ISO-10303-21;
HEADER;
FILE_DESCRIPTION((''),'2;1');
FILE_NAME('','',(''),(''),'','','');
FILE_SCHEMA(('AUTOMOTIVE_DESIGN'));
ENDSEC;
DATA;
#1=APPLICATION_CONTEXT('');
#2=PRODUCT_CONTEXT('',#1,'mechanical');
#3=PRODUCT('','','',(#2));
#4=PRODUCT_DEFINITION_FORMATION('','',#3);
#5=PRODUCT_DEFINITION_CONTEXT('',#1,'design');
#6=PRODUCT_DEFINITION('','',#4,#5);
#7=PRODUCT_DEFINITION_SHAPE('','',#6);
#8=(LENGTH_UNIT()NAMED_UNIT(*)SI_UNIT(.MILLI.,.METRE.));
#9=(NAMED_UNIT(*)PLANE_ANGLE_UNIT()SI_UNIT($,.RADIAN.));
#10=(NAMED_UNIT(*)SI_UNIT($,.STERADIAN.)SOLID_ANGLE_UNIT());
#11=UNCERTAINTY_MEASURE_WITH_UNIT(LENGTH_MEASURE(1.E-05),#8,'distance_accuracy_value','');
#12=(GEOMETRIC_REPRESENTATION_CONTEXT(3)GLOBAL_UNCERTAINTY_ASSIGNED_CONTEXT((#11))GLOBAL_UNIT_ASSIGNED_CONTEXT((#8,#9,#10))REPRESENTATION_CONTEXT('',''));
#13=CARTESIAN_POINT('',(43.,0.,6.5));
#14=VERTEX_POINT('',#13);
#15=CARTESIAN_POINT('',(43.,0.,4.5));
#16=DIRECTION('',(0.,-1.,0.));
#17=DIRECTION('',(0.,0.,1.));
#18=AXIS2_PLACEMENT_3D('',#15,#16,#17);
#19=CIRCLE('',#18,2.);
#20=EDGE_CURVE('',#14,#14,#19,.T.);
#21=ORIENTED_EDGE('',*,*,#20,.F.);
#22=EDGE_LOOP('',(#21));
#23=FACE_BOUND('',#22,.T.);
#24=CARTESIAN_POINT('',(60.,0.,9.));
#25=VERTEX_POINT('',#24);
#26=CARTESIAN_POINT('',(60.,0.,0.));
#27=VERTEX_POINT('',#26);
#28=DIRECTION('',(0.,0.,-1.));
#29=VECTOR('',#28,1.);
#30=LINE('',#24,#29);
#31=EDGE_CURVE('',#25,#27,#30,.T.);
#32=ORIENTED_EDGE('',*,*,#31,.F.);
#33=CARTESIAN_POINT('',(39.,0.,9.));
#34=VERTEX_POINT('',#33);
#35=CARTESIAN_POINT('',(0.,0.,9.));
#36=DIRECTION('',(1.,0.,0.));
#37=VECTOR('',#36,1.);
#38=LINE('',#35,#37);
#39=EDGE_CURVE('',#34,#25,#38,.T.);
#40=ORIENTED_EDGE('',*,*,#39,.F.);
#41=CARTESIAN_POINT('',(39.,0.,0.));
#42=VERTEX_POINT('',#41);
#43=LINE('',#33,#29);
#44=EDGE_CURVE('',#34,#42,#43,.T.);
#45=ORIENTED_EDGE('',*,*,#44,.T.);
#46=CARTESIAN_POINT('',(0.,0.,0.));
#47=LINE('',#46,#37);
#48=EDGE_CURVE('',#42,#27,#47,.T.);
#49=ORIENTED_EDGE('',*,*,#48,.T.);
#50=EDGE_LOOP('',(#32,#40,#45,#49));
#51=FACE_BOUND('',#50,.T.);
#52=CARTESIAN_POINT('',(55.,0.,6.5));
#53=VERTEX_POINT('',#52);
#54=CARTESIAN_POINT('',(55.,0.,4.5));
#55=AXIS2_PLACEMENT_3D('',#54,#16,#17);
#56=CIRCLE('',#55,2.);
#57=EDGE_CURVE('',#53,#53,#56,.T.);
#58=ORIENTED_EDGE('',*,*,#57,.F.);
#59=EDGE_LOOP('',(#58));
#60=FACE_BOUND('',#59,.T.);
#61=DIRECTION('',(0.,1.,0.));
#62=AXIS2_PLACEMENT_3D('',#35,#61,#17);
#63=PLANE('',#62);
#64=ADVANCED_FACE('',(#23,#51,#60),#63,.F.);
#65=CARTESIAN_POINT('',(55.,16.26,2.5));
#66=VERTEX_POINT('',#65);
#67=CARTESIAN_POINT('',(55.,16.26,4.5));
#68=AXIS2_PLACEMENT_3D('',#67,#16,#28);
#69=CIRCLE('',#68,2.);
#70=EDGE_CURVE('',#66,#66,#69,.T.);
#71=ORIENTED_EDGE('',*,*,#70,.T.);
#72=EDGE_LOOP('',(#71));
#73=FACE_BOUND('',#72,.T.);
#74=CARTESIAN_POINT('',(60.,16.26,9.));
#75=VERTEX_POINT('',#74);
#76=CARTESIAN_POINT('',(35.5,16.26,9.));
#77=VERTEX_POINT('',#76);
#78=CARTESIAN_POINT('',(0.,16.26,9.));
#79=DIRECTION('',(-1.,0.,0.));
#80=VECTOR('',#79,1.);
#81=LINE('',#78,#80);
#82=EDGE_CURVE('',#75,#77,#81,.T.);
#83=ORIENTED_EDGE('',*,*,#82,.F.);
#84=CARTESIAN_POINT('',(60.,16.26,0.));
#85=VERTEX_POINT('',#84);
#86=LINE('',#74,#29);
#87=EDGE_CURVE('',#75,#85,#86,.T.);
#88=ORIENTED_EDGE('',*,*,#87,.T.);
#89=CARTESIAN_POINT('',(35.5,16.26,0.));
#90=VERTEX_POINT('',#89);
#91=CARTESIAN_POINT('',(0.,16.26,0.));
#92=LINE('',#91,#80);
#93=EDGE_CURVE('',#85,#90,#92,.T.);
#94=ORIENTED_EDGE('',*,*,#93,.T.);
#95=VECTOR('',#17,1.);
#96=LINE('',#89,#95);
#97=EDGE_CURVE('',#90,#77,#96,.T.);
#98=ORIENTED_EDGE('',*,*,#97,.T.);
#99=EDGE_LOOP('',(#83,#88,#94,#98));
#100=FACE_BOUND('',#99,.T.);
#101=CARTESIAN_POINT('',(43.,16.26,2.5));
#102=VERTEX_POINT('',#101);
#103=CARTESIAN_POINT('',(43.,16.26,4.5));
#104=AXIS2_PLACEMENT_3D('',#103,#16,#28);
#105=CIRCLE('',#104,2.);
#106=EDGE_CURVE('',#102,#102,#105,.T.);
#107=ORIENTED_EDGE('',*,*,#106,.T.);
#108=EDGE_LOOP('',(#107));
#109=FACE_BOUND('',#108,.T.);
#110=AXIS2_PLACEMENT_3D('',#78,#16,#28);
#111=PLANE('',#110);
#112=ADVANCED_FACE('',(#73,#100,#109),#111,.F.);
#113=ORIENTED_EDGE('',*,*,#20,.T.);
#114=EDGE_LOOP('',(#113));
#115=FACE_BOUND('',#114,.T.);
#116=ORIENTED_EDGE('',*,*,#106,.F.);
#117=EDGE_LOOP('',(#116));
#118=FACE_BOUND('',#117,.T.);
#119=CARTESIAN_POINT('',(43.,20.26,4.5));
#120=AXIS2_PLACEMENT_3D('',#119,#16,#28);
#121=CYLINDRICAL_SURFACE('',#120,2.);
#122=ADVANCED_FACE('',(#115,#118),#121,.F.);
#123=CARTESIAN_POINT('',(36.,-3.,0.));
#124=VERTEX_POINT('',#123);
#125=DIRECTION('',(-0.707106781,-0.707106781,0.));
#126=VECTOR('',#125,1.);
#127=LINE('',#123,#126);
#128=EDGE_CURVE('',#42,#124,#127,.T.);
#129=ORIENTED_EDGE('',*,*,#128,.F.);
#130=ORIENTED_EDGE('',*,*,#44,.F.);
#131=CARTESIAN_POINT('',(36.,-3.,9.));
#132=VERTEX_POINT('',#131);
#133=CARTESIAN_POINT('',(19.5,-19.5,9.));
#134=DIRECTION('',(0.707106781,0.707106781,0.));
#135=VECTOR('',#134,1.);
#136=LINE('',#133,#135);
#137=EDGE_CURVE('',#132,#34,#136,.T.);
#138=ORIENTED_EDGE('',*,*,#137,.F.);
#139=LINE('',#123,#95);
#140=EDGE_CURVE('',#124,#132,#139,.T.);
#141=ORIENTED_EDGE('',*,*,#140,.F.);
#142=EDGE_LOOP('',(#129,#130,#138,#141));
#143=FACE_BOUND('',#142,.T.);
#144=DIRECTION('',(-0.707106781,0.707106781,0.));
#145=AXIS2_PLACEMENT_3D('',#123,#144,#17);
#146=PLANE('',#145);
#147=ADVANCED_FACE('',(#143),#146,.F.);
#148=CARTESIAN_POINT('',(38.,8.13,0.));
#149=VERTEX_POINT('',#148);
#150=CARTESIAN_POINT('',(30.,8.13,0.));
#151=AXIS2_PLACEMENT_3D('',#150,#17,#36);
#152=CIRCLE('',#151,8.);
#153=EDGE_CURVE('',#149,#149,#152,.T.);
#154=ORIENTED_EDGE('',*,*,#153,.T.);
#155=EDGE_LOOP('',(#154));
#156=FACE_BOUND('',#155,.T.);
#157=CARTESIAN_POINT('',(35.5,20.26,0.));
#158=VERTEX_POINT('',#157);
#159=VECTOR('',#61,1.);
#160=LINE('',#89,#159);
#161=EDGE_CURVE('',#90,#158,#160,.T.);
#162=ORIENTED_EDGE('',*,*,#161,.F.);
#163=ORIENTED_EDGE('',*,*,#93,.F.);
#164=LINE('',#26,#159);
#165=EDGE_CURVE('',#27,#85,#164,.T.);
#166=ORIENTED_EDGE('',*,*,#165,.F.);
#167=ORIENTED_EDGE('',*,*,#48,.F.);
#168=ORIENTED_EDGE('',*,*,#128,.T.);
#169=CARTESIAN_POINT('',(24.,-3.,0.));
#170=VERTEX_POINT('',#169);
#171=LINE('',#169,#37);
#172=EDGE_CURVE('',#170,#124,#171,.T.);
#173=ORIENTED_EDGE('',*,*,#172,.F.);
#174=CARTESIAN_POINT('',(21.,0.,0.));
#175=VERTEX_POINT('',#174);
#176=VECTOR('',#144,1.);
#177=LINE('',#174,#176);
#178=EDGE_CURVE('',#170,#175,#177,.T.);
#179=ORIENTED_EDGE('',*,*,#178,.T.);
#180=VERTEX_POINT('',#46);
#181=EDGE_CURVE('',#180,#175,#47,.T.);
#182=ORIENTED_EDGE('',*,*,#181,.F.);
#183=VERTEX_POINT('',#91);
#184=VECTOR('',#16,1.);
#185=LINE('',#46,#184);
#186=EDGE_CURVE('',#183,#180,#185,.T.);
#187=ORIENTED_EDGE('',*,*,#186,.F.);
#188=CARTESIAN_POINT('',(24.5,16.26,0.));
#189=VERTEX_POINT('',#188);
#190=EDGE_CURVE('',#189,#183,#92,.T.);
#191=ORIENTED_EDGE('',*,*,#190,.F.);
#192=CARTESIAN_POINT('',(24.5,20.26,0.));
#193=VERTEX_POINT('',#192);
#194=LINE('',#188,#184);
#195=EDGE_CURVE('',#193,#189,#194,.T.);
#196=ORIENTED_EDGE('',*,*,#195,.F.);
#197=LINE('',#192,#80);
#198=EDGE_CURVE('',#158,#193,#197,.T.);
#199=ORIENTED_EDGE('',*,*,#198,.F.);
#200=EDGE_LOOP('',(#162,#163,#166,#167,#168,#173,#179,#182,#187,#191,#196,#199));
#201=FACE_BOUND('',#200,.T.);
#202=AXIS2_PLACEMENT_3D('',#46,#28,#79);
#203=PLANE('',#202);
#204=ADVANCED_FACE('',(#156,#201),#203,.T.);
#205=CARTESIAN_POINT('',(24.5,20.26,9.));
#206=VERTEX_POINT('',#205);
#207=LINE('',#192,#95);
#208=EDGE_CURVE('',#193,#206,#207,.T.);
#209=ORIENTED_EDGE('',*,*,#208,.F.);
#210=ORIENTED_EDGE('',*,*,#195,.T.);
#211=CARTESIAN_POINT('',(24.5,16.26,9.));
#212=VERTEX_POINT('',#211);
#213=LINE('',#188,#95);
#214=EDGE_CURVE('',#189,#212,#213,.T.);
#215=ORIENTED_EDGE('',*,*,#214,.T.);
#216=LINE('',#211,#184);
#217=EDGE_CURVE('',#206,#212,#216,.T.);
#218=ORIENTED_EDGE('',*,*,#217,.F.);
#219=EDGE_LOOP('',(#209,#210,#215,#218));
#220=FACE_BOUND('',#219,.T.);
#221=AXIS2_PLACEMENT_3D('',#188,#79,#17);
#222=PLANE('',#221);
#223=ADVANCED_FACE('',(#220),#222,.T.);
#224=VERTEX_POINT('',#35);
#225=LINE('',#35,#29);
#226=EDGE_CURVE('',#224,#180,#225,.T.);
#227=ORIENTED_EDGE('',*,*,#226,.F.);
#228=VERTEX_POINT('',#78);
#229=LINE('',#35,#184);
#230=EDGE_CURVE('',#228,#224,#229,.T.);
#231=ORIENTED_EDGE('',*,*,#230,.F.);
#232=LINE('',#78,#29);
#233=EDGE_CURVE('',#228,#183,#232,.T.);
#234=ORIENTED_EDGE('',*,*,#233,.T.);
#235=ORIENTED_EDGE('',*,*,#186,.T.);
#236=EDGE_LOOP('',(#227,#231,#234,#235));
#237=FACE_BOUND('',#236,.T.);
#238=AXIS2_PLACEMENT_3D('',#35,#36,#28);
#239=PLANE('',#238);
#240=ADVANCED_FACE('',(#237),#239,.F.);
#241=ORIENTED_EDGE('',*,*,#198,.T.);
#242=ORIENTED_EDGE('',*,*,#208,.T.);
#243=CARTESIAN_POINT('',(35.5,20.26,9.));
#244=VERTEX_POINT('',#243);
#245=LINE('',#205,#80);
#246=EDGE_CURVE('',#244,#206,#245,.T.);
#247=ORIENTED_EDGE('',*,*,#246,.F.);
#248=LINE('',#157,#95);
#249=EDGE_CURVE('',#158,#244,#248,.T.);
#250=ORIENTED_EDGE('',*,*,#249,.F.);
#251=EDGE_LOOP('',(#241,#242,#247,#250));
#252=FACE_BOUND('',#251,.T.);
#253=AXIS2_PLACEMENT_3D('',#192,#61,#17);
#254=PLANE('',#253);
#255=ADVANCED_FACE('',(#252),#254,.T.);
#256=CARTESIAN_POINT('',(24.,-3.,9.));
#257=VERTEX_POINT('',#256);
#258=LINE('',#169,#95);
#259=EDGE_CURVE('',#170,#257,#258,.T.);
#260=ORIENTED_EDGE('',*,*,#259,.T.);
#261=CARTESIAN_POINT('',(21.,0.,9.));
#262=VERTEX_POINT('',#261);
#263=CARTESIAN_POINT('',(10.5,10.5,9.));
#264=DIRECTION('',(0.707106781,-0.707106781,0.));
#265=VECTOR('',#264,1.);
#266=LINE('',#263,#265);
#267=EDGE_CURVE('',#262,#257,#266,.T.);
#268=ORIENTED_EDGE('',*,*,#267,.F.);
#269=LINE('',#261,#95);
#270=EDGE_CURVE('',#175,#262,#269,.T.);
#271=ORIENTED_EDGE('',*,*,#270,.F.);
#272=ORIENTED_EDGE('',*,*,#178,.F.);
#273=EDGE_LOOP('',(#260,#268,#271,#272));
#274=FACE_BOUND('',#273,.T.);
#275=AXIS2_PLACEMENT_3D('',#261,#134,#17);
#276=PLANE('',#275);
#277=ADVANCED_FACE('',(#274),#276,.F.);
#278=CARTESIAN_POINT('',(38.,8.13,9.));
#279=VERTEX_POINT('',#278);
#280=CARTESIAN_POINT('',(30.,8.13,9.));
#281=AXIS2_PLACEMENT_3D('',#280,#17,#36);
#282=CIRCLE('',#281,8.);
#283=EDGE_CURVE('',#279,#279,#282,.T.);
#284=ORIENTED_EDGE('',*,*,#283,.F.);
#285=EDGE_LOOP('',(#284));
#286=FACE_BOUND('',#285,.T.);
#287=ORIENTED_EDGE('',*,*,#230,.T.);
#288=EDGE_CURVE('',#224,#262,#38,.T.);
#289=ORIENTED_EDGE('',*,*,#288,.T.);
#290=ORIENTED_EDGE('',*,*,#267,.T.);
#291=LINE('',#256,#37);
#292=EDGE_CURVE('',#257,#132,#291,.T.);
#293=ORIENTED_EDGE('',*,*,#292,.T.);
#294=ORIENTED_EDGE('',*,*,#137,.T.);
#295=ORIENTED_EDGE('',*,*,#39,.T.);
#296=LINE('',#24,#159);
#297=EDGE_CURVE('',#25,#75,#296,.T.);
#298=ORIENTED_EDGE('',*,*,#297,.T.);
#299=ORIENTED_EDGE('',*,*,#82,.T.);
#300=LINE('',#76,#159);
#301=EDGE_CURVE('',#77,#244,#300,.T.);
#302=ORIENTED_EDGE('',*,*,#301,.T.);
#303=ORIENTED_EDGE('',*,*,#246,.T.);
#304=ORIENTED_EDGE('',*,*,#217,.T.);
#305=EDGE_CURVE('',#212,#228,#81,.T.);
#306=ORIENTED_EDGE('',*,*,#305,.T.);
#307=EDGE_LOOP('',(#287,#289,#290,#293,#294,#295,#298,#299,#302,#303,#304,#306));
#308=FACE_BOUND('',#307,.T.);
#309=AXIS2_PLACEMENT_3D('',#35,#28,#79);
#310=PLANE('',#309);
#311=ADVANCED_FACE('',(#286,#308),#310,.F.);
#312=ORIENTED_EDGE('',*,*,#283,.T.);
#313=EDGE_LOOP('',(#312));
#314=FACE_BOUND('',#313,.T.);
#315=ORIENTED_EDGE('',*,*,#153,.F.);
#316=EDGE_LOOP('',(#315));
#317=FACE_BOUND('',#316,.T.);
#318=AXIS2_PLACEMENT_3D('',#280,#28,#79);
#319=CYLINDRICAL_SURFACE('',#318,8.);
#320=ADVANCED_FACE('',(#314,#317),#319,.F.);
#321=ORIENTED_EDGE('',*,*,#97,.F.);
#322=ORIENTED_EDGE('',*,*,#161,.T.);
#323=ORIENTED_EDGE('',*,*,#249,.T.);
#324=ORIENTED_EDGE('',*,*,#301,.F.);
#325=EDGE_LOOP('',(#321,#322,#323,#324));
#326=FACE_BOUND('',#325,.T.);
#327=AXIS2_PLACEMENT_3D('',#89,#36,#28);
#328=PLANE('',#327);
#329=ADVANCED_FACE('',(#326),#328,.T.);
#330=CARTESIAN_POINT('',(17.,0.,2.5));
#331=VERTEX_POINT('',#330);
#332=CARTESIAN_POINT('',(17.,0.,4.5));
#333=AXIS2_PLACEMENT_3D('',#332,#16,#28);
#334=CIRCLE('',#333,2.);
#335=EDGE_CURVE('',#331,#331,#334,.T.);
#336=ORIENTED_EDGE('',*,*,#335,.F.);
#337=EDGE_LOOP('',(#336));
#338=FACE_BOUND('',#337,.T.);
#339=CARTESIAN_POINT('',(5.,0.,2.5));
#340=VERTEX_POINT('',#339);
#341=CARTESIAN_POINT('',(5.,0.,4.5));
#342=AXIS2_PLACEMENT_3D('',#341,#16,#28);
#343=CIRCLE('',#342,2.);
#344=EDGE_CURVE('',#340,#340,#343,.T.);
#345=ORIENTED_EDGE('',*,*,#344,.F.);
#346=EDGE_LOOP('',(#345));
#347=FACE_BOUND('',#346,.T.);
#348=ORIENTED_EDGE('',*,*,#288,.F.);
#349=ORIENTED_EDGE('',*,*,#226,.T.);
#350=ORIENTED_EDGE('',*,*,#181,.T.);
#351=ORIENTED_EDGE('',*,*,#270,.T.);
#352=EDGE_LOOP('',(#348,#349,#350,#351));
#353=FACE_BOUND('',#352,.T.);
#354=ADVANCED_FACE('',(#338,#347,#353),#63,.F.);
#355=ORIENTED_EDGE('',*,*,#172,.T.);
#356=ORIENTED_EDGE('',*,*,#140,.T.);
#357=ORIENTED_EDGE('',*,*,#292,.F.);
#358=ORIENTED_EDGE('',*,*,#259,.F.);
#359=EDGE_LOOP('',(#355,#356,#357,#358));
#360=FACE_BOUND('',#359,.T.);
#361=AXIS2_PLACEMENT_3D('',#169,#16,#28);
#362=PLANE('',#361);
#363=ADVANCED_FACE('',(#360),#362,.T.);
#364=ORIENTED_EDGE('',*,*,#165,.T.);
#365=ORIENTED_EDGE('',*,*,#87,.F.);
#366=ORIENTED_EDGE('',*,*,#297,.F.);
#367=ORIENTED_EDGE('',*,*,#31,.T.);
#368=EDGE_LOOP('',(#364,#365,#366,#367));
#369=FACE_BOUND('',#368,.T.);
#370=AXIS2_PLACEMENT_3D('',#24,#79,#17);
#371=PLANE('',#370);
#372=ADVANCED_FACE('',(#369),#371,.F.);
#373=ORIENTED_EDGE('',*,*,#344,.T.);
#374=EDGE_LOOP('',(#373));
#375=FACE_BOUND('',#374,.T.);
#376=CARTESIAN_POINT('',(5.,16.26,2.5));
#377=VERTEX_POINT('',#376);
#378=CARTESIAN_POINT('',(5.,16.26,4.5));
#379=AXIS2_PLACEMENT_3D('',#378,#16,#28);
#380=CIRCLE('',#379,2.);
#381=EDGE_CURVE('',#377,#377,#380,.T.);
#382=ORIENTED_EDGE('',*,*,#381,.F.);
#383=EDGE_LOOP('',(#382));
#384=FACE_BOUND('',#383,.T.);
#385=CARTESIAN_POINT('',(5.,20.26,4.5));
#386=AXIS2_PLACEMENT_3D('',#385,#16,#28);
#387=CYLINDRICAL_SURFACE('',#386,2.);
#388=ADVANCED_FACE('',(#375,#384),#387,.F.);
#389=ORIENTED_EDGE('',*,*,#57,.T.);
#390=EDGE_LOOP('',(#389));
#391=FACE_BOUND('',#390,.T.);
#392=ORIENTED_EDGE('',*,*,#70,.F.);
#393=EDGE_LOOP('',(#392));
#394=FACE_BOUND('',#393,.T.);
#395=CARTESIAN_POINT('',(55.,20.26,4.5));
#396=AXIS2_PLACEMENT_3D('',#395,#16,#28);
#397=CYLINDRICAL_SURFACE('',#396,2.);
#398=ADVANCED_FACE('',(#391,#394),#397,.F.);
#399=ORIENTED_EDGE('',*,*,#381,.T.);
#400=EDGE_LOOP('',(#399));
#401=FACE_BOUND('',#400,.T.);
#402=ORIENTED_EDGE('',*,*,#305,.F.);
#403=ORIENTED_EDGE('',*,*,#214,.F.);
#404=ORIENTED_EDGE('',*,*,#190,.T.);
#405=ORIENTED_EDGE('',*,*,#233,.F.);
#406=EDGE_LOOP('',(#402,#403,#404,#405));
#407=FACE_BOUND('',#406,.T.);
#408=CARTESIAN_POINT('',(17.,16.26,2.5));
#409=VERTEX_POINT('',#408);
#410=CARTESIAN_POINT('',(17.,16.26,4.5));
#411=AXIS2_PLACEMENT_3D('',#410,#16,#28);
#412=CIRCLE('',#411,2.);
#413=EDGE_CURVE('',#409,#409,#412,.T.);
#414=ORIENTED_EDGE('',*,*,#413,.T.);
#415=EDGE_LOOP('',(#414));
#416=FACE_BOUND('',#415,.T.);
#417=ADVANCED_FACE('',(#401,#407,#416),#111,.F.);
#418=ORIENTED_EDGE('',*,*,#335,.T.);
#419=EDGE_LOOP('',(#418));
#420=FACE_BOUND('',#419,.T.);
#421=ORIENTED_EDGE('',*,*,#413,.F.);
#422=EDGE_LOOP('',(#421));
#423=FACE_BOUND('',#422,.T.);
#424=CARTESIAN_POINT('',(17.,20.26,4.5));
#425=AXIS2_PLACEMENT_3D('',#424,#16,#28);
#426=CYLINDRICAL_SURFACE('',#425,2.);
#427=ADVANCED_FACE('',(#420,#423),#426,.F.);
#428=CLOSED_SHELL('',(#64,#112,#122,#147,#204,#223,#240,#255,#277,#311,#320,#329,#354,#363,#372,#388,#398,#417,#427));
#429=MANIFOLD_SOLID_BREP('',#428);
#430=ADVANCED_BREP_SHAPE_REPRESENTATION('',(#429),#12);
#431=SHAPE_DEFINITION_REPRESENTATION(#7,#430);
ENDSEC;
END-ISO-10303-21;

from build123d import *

# Parameters (mm, degrees)
ESQUISSE1_W             = 60
ESQUISSE1_H             = 16.26
ESQUISSE1_R             = 8
BOSS_EXTRU_1_DEPTH      = 9
ESQUISSE2_W             = 11
ESQUISSE2_H             = 4
BOSS_EXTRU_2_DEPTH      = 9
ESQUISSE3_W             = 12
ESQUISSE3_H             = 3
BOSS_EXTRU_3_DEPTH      = 9
CHANFREIN2_SIZE         = 3
ESQUISSE4_R             = 2
ENL_V_MAT_EXTRU_1_DEPTH = 64.964580824


with BuildPart() as part:
    # Esquisse1 → Boss.-Extru.1 (new body)
    with BuildSketch(Plane.XY):
        with Locations((30, 8.13)):
            Rectangle(ESQUISSE1_W, ESQUISSE1_H)
        with Locations((30, 8.13)):
            Circle(ESQUISSE1_R, mode=Mode.SUBTRACT)
    extrude(amount=BOSS_EXTRU_1_DEPTH)

    # Esquisse2 → Boss.-Extru.2 (add)
    with BuildSketch(Plane.XY.offset(9)):
        with Locations((30, 18.26)):
            Rectangle(ESQUISSE2_W, ESQUISSE2_H)
    extrude(amount=-BOSS_EXTRU_2_DEPTH)

    # Esquisse3 → Boss.-Extru.3 (add)
    with BuildSketch(Plane.XY.offset(9)):
        with Locations((30, -1.5)):
            Rectangle(ESQUISSE3_W, ESQUISSE3_H)
    extrude(amount=-BOSS_EXTRU_3_DEPTH)

    # Chanfrein2
    chanfrein2_edges = [part.edges().sort_by_distance(p)[0] for p in [
        (36, 0, 4.5),
        (24, 0, 4.5),
    ]]
    chamfer(chanfrein2_edges, length=CHANFREIN2_SIZE - 0.0001)  # a hair under: the kernel refuses the full size

    # Esquisse4 → Enlèv. mat.-Extru.1 (cut, through all)
    with BuildSketch(Plane.XZ):
        with Locations(Location((17, 4.5, 0), (0, 0, 270))):
            Circle(ESQUISSE4_R)
        with Locations(Location((5, 4.5, 0), (0, 0, 270))):
            Circle(ESQUISSE4_R)
        with Locations(Location((55, 4.5, 0), (0, 0, 270))):
            Circle(ESQUISSE4_R)
        with Locations(Location((43, 4.5, 0), (0, 0, 270))):
            Circle(ESQUISSE4_R)
    extrude(amount=-ENL_V_MAT_EXTRU_1_DEPTH, mode=Mode.SUBTRACT)


solid = part.part
